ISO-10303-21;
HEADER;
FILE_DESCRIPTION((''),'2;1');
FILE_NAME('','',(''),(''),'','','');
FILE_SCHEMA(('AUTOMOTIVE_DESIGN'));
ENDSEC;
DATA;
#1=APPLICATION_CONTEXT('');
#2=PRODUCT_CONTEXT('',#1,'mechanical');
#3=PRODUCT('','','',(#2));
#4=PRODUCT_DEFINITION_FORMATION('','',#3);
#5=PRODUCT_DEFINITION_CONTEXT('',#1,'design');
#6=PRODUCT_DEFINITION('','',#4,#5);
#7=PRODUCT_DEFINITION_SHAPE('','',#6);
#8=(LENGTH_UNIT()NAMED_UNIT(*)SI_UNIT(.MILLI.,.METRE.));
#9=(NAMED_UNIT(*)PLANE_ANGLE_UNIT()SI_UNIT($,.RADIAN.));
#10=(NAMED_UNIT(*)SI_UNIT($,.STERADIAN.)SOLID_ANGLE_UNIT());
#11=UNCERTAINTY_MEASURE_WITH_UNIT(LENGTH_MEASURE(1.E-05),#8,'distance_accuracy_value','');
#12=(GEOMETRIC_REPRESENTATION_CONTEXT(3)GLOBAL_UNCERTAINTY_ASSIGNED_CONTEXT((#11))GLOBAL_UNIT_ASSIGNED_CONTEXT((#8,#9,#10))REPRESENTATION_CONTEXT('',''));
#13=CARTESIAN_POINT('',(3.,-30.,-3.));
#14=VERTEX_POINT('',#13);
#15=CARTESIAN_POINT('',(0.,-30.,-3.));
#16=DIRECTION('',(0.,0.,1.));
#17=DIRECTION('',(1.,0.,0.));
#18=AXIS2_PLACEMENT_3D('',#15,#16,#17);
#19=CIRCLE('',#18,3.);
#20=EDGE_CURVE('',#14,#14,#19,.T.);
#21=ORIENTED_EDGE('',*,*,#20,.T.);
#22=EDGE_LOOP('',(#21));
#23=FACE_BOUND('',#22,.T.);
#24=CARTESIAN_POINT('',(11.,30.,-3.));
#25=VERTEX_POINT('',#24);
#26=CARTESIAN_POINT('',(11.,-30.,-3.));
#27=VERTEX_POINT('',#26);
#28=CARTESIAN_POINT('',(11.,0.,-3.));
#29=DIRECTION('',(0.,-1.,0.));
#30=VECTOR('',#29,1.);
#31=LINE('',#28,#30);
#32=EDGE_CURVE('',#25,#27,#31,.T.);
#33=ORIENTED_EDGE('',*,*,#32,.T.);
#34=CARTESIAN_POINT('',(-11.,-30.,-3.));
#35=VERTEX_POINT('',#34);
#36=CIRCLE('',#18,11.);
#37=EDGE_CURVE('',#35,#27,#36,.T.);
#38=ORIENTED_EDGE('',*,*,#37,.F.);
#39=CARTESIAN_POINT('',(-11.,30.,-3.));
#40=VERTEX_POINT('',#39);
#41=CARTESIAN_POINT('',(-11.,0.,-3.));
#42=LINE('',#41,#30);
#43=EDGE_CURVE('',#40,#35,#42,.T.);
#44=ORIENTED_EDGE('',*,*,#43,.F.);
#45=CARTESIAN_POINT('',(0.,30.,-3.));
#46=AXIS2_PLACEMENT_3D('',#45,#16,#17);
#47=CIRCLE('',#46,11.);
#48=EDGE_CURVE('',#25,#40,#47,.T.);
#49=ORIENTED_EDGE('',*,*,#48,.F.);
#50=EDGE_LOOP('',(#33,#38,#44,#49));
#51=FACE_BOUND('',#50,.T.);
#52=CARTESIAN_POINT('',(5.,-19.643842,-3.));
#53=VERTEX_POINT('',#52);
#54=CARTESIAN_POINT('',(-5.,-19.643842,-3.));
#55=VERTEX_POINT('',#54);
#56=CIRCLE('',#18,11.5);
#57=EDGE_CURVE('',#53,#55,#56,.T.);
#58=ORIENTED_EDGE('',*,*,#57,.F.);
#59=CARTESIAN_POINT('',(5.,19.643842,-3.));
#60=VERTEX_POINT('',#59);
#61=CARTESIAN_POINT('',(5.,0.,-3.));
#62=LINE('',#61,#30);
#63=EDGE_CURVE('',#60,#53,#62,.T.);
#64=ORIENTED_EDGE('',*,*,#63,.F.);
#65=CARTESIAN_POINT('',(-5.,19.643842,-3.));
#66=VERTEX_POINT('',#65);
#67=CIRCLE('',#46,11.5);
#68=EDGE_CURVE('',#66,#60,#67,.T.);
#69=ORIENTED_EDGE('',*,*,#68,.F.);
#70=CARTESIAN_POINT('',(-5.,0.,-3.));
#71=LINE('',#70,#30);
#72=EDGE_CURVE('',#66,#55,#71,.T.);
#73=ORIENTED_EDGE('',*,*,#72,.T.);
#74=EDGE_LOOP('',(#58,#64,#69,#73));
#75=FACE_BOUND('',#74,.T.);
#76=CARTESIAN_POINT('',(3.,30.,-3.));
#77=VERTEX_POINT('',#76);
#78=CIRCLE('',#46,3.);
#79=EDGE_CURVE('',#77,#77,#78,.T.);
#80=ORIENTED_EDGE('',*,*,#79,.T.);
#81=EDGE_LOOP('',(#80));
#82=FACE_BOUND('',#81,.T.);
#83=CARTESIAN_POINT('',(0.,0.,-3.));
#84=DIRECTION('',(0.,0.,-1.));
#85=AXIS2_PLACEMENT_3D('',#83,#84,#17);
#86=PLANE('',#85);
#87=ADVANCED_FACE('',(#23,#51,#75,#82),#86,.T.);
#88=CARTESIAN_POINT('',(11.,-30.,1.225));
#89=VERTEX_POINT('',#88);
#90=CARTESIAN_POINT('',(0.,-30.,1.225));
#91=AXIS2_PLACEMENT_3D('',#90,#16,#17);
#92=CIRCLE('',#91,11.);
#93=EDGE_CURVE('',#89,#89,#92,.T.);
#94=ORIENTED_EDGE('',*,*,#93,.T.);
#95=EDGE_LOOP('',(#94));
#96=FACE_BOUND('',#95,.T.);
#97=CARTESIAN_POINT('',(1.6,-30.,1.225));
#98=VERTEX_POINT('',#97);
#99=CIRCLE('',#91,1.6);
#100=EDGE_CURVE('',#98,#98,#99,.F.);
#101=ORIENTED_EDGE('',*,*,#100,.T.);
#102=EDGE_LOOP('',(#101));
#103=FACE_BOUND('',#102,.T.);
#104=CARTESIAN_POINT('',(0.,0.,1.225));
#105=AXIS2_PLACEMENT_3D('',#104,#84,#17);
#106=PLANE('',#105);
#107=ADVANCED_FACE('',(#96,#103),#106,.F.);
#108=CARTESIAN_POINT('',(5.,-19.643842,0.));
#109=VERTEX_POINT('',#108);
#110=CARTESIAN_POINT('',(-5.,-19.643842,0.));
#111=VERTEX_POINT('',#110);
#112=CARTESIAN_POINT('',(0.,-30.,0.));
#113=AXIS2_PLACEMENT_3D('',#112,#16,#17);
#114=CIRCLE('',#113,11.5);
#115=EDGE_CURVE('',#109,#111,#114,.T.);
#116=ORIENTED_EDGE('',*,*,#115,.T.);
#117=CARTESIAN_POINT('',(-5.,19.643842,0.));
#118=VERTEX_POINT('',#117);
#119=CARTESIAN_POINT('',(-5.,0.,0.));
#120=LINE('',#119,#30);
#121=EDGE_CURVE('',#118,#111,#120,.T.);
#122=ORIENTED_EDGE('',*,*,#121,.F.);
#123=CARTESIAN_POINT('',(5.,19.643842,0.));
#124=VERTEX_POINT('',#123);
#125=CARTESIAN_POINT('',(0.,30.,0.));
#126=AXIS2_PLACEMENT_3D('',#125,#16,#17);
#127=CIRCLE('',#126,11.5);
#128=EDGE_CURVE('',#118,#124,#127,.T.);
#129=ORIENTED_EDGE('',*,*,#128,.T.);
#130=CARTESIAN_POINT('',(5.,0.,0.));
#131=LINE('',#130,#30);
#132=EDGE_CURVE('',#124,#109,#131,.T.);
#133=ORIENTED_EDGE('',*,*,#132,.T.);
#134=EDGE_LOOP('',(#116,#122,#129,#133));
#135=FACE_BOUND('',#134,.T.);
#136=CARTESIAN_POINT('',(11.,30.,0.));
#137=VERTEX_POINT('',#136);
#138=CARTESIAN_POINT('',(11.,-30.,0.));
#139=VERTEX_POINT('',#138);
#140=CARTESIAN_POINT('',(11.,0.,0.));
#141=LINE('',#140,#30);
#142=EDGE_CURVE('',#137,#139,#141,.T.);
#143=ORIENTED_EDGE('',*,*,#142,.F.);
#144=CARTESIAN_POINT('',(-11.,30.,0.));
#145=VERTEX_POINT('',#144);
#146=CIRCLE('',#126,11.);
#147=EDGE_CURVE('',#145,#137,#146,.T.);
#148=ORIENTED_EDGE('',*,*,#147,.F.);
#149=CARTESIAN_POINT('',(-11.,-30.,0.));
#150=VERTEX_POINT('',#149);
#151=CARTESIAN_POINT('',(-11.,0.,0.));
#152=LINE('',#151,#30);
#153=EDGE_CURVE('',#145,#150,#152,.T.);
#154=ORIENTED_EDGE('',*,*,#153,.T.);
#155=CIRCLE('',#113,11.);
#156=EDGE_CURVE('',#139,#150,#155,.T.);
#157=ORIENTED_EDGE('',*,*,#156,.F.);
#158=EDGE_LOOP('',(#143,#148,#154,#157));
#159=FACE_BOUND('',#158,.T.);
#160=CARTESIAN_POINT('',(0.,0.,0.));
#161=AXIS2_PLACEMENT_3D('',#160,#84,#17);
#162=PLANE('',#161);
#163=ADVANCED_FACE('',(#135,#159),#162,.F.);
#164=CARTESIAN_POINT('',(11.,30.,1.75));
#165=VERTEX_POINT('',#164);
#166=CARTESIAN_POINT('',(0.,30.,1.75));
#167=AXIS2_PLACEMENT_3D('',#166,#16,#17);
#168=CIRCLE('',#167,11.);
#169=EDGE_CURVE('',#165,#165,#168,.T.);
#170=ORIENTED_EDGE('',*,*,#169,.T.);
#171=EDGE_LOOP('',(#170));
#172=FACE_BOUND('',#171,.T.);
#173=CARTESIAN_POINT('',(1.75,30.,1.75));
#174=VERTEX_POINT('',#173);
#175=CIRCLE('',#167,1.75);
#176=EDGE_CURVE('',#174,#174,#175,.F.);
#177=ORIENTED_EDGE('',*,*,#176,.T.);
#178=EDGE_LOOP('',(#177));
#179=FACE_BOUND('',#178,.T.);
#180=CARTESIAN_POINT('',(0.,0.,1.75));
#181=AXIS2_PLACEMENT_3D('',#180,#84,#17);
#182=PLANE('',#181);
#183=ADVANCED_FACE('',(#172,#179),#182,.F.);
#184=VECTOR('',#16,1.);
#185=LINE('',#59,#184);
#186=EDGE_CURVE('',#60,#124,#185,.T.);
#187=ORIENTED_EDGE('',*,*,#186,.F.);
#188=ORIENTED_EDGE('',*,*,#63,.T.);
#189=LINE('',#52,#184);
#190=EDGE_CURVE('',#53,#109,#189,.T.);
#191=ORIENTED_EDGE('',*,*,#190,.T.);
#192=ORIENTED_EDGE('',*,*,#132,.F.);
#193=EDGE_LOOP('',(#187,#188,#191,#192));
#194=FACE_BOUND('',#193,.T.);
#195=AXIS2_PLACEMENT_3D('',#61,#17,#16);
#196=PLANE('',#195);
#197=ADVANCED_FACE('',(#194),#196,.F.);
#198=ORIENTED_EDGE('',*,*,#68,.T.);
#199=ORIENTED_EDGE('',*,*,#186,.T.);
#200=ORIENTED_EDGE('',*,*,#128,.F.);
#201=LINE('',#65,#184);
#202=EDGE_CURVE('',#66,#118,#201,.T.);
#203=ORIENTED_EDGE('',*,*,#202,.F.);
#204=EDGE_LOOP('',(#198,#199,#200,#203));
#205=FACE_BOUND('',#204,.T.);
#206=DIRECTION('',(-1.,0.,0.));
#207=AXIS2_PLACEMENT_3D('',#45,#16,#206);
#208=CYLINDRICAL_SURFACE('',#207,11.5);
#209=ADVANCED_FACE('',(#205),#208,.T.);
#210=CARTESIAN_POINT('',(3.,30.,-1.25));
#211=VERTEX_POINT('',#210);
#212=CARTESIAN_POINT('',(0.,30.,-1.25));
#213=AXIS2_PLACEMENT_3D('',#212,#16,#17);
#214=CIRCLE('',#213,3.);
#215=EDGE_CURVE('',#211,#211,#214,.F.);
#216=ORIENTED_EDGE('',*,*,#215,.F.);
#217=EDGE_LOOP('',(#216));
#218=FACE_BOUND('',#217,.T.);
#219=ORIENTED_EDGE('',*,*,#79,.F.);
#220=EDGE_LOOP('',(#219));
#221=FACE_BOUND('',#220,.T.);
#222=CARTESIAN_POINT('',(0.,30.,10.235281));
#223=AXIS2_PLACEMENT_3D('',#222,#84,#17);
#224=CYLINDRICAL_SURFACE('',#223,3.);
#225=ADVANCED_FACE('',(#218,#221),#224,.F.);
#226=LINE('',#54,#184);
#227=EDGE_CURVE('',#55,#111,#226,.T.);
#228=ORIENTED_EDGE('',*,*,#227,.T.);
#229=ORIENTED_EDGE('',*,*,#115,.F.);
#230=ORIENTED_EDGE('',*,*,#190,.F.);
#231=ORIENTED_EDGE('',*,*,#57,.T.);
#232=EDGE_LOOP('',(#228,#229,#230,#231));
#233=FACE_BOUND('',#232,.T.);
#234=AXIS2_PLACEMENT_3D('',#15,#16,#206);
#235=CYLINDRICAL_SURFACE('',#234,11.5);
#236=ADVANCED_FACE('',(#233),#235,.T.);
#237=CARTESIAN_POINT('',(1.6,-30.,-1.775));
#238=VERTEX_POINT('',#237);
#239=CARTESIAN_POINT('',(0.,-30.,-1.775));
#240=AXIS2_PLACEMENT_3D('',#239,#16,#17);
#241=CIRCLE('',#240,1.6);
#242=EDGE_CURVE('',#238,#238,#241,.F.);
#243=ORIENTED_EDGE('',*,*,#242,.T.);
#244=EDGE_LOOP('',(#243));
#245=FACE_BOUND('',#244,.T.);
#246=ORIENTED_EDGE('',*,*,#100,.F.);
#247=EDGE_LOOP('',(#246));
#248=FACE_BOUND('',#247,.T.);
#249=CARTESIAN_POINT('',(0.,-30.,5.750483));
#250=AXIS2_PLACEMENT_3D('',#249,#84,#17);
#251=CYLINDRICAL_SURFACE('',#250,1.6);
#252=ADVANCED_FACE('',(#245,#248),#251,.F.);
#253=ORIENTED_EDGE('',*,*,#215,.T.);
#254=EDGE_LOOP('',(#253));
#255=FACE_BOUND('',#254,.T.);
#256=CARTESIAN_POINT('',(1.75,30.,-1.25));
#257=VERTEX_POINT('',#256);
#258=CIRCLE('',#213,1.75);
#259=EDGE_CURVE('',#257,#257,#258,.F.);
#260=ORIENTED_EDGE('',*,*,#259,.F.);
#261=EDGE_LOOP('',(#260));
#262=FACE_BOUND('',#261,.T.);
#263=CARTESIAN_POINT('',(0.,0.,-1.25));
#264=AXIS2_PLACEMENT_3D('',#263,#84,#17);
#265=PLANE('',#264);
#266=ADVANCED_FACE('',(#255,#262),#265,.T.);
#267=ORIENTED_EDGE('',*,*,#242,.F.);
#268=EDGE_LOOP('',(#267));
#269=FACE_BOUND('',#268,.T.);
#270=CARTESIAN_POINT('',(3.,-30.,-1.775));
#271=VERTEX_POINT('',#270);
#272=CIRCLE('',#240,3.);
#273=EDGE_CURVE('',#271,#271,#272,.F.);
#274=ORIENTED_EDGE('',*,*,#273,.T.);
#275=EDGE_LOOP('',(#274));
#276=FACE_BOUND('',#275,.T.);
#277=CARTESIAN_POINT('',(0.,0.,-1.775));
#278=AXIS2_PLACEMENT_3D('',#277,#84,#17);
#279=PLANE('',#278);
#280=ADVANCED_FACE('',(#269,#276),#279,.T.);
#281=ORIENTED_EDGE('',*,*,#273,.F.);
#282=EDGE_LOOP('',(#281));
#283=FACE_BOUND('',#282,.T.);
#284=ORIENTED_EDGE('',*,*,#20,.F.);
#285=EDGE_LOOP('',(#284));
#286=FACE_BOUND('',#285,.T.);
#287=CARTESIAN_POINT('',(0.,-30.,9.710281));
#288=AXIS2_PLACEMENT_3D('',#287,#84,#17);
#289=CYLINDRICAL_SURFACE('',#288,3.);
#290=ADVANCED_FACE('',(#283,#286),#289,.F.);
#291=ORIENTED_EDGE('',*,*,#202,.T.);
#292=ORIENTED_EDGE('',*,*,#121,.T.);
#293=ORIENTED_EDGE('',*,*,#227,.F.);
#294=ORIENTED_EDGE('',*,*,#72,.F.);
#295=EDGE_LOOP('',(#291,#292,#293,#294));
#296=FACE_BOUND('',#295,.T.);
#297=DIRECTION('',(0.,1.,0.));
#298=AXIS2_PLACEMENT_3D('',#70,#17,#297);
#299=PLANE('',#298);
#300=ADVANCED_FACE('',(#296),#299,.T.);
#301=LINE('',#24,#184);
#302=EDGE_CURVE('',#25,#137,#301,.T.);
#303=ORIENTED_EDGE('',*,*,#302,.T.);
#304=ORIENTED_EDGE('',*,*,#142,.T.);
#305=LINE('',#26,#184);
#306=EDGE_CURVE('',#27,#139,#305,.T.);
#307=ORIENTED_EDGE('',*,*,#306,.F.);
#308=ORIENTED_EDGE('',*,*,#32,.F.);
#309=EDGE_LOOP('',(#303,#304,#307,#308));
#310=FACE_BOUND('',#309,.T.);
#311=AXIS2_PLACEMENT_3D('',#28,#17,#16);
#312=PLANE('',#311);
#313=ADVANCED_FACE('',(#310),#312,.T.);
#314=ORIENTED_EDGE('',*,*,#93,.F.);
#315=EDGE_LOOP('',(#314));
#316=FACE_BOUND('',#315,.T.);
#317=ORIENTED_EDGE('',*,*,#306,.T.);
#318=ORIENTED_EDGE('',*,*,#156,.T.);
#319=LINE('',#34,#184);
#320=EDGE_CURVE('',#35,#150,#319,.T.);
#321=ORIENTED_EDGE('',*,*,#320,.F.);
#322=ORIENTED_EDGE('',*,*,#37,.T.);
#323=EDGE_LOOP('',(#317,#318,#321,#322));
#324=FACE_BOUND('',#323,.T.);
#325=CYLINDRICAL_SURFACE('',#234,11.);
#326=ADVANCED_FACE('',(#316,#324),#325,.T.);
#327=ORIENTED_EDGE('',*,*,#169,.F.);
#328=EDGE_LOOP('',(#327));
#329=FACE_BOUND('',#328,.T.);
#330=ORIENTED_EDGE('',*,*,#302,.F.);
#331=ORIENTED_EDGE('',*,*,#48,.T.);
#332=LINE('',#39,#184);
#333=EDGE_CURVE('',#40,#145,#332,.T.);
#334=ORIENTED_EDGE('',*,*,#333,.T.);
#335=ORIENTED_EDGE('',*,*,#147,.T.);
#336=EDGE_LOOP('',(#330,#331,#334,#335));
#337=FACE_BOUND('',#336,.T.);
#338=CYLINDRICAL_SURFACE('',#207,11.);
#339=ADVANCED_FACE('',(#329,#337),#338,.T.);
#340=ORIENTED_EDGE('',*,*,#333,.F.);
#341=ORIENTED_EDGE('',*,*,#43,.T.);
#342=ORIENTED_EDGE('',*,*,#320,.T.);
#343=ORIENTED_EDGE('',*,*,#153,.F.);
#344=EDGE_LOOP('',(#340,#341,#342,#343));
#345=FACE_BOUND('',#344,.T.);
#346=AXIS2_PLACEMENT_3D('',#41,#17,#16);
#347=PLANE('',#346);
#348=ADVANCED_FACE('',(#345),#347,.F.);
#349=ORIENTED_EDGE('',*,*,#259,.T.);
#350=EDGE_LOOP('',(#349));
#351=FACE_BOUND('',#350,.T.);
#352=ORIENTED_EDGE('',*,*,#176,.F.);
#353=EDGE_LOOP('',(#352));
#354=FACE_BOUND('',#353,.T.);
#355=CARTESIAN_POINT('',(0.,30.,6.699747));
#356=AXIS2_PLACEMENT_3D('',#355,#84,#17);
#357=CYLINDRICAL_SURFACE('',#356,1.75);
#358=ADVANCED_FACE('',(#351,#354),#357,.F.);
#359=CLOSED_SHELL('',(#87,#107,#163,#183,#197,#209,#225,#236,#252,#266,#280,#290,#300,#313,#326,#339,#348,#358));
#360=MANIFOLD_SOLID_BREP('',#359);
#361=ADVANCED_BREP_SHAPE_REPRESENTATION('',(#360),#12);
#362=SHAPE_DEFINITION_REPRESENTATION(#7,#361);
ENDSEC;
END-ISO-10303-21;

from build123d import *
from build123d.topology import SkipClean

# Parameters (mm, degrees)
BOSS_EXTRUDE1_DEPTH           = 3
BOSS_EXTRUDE2_START           = -1.75
SKETCH1_3_R                   = 11
BOSS_EXTRUDE2_DEPTH           = 1.75
SKETCH2_R                     = 1.75
CUT_EXTRUDE1_DEPTH            = 4.75
SKETCH2_3_R                   = 3
CUT_EXTRUDE2_DEPTH            = 1.75
BOSS_EXTRUDE3_START           = -1.225
SKETCH1_4_R                   = 11
BOSS_EXTRUDE3_DEPTH           = 1.225
SKETCH3_R                     = 1.6
CUT_EXTRUDE3_DEPTH            = 4.225
SKETCH3_3_R                   = 3
SKETCH3_3_R_2                 = 1.6
CUT_EXTRUDE4_DEPTH            = 1.225
BODY_MOVE_COPY1_DEPTH         = 3
BODY_MOVE_COPY1_START         = 1.75
BODY_MOVE_COPY1_2_OUTLINE_R   = 11
BODY_MOVE_COPY1_2_OUTLINE_R_2 = 1.6
BODY_MOVE_COPY1_2_OUTLINE_R_3 = 3
BODY_MOVE_COPY1_2_DEPTH       = 1.25
BODY_MOVE_COPY1_START_2       = 1.225
BODY_MOVE_COPY1_3_OUTLINE_R   = 11
BODY_MOVE_COPY1_3_OUTLINE_R_2 = 1.6
BODY_MOVE_COPY1_3_DEPTH       = 0.525
BODY_MOVE_COPY1_START_3       = -1.75
BODY_MOVE_COPY1_4_OUTLINE_R   = 3
BODY_MOVE_COPY1_4_OUTLINE_R_2 = 1.75
BODY_MOVE_COPY1_4_DEPTH       = 0.5
BODY_MOVE_COPY1_START_4       = -3
BODY_MOVE_COPY1_5_OUTLINE_R   = 3
BODY_MOVE_COPY1_5_DEPTH       = 3
BODY_MOVE_COPY1_START_5       = -1.775
BODY_MOVE_COPY1_6_OUTLINE_R   = 3
BODY_MOVE_COPY1_6_OUTLINE_R_2 = 1.6
BODY_MOVE_COPY1_6_DEPTH       = 0.55
BODY_MOVE_COPY1_START_6       = 1.25
BODY_MOVE_COPY1_7_OUTLINE_R   = 3
BODY_MOVE_COPY1_7_OUTLINE_R_2 = 1.75
BODY_MOVE_COPY1_7_DEPTH       = 0.5


# Read off the part's stored shape, not the designer's step: Body-Move/Copy1
with BuildPart() as part:
    # Sketch1 → Boss-Extrude1 (new body)
    with BuildSketch(Plane.XY):
        with BuildLine():
            Line((-11, 30), (-11, -30))
            ThreePointArc((-11, -30), (0, -41), (11, -30))
            Line((11, -30), (11, 30))
            ThreePointArc((11, 30), (0, 41), (-11, 30))
        make_face()
        with BuildLine():
            ThreePointArc((5, -19.643842411), (0, -18.5), (-5, -19.643842411))
            Line((-5, -19.643842411), (-5, 19.643842411))
            ThreePointArc((-5, 19.643842411), (0, 18.5), (5, 19.643842411))
            Line((5, 19.643842411), (5, -19.643842411))
        make_face(mode=Mode.SUBTRACT)
    extrude(amount=BOSS_EXTRUDE1_DEPTH)

    # Sketch1<3> → Boss-Extrude2 (add)
    with BuildSketch(Plane.XY.offset(BOSS_EXTRUDE2_START)):
        with Locations((0, 30)):
            Circle(SKETCH1_3_R)
    extrude(amount=BOSS_EXTRUDE2_DEPTH)

    # Sketch2 → Cut-Extrude1 (cut)
    with BuildSketch(Plane.XY.offset(3)):
        with Locations((0, 30)):
            Circle(SKETCH2_R)
    extrude(amount=-CUT_EXTRUDE1_DEPTH, mode=Mode.SUBTRACT)

    # Sketch2<3> → Cut-Extrude2 (cut)
    with BuildSketch(Plane.XY.offset(3)):
        with Locations((0, 30)):
            Circle(SKETCH2_3_R)
    extrude(amount=-CUT_EXTRUDE2_DEPTH, mode=Mode.SUBTRACT)

    # Sketch1<4> → Boss-Extrude3 (add)
    with SkipClean():  # the faces are left unmerged after this step: merging them gives an invalid solid
        with BuildSketch(Plane.XY.offset(BOSS_EXTRUDE3_START)):
            with Locations((0, -30)):
                Circle(SKETCH1_4_R)
        extrude(amount=BOSS_EXTRUDE3_DEPTH)

    # Sketch3 → Cut-Extrude3 (cut)
    with SkipClean():  # the faces are left unmerged after this step: merging them gives an invalid solid
        with BuildSketch(Plane.XY.offset(3)):
            with Locations((0, -30)):
                Circle(SKETCH3_R)
        extrude(amount=-CUT_EXTRUDE3_DEPTH, mode=Mode.SUBTRACT)

    # Sketch3<3> → Cut-Extrude4 (cut)
    with SkipClean():  # the faces are left unmerged after this step: merging them gives an invalid solid
        with BuildSketch(Plane.XY.offset(3)):
            with Locations((0, -30)):
                Circle(SKETCH3_3_R)
            with Locations((0, -30)):
                Circle(SKETCH3_3_R_2, mode=Mode.SUBTRACT)
        extrude(amount=-CUT_EXTRUDE4_DEPTH, mode=Mode.SUBTRACT)

    # Body-Move/Copy1 outline → Body-Move/Copy1 (cut)
    with SkipClean():  # the faces are left unmerged after this step: merging them gives an invalid solid
        with BuildSketch(Plane.XY):
            with BuildLine():
                Line((-11, 30), (-11, -30))
                ThreePointArc((-11, -30), (0, -19), (11, -30))
                Line((11, -30), (11, 30))
                ThreePointArc((11, 30), (0, 19), (-11, 30))
            make_face()
            with BuildLine():
                Line((-5, -19.643842411), (-5, 19.643842411))
                ThreePointArc((-5, 19.643842411), (0, 18.5), (5, 19.643842411))
                Line((5, 19.643842411), (5, -19.643842411))
                ThreePointArc((5, -19.643842411), (0, -18.5), (-5, -19.643842411))
            make_face(mode=Mode.SUBTRACT)
        extrude(amount=BODY_MOVE_COPY1_DEPTH, mode=Mode.SUBTRACT)

    # Body-Move_Copy1 2 outline → Body-Move_Copy1 2 (cut)
    # profile 1 of 2: a face of its own
    with SkipClean():  # the faces are left unmerged after this step: merging them gives an invalid solid
        with BuildSketch(Plane.XY.offset(BODY_MOVE_COPY1_START)):
            with Locations((0, -30)):
                Circle(BODY_MOVE_COPY1_2_OUTLINE_R)
            with Locations((0, -30)):
                Circle(BODY_MOVE_COPY1_2_OUTLINE_R_2, mode=Mode.SUBTRACT)
        # profile 2 of 2: a face of its own
        with BuildSketch(Plane.XY.offset(BODY_MOVE_COPY1_START)):
            with Locations((0, 30)):
                Circle(BODY_MOVE_COPY1_2_OUTLINE_R)
            with Locations((0, 30)):
                Circle(BODY_MOVE_COPY1_2_OUTLINE_R_3, mode=Mode.SUBTRACT)
        extrude(amount=BODY_MOVE_COPY1_2_DEPTH, mode=Mode.SUBTRACT)

    # Body-Move_Copy1 3 outline → Body-Move_Copy1 3 (cut)
    with SkipClean():  # the faces are left unmerged after this step: merging them gives an invalid solid
        with BuildSketch(Plane.XY.offset(BODY_MOVE_COPY1_START_2)):
            with Locations((0, -30)):
                Circle(BODY_MOVE_COPY1_3_OUTLINE_R)
            with Locations((0, -30)):
                Circle(BODY_MOVE_COPY1_3_OUTLINE_R_2, mode=Mode.SUBTRACT)
        extrude(amount=BODY_MOVE_COPY1_3_DEPTH, mode=Mode.SUBTRACT)

    # Body-Move_Copy1 4 outline → Body-Move_Copy1 4 (cut)
    with SkipClean():  # the faces are left unmerged after this step: merging them gives an invalid solid
        with BuildSketch(Plane.XY.offset(BODY_MOVE_COPY1_START_3)):
            with Locations((0, 30)):
                Circle(BODY_MOVE_COPY1_4_OUTLINE_R)
            with Locations((0, 30)):
                Circle(BODY_MOVE_COPY1_4_OUTLINE_R_2, mode=Mode.SUBTRACT)
        extrude(amount=BODY_MOVE_COPY1_4_DEPTH, mode=Mode.SUBTRACT)

    # Body-Move_Copy1 5 outline → Body-Move_Copy1 5 (add)
    with BuildSketch(Plane.XY.offset(BODY_MOVE_COPY1_START_4)):
        with BuildLine():
            Line((-11, 30), (-11, -30))
            ThreePointArc((-11, -30), (0, -41), (11, -30))
            Line((11, -30), (11, 30))
            ThreePointArc((11, 30), (0, 41), (-11, 30))
        make_face()
        with BuildLine():
            Line((-5, -19.643842411), (-5, 19.643842411))
            ThreePointArc((-5, 19.643842411), (0, 18.5), (5, 19.643842411))
            Line((5, 19.643842411), (5, -19.643842411))
            ThreePointArc((5, -19.643842411), (0, -18.5), (-5, -19.643842411))
        make_face(mode=Mode.SUBTRACT)
        with Locations((0, 30)):
            Circle(BODY_MOVE_COPY1_5_OUTLINE_R, mode=Mode.SUBTRACT)
        with Locations((0, -30)):
            Circle(BODY_MOVE_COPY1_5_OUTLINE_R, mode=Mode.SUBTRACT)
    extrude(amount=BODY_MOVE_COPY1_5_DEPTH)

    # Body-Move_Copy1 6 outline → Body-Move_Copy1 6 (add)
    with SkipClean():  # the faces are left unmerged after this step: merging them gives an invalid solid
        with BuildSketch(Plane.XY.offset(BODY_MOVE_COPY1_START_5)):
            with Locations((0, -30)):
                Circle(BODY_MOVE_COPY1_6_OUTLINE_R)
            with Locations((0, -30)):
                Circle(BODY_MOVE_COPY1_6_OUTLINE_R_2, mode=Mode.SUBTRACT)
        extrude(amount=BODY_MOVE_COPY1_6_DEPTH)

    # Body-Move_Copy1 7 outline → Body-Move_Copy1 7 (add)
    with BuildSketch(Plane.XY.offset(BODY_MOVE_COPY1_START_6)):
        with Locations((0, 30)):
            Circle(BODY_MOVE_COPY1_7_OUTLINE_R)
        with Locations((0, 30)):
            Circle(BODY_MOVE_COPY1_7_OUTLINE_R_2, mode=Mode.SUBTRACT)
    extrude(amount=BODY_MOVE_COPY1_7_DEPTH)


solid = part.part
